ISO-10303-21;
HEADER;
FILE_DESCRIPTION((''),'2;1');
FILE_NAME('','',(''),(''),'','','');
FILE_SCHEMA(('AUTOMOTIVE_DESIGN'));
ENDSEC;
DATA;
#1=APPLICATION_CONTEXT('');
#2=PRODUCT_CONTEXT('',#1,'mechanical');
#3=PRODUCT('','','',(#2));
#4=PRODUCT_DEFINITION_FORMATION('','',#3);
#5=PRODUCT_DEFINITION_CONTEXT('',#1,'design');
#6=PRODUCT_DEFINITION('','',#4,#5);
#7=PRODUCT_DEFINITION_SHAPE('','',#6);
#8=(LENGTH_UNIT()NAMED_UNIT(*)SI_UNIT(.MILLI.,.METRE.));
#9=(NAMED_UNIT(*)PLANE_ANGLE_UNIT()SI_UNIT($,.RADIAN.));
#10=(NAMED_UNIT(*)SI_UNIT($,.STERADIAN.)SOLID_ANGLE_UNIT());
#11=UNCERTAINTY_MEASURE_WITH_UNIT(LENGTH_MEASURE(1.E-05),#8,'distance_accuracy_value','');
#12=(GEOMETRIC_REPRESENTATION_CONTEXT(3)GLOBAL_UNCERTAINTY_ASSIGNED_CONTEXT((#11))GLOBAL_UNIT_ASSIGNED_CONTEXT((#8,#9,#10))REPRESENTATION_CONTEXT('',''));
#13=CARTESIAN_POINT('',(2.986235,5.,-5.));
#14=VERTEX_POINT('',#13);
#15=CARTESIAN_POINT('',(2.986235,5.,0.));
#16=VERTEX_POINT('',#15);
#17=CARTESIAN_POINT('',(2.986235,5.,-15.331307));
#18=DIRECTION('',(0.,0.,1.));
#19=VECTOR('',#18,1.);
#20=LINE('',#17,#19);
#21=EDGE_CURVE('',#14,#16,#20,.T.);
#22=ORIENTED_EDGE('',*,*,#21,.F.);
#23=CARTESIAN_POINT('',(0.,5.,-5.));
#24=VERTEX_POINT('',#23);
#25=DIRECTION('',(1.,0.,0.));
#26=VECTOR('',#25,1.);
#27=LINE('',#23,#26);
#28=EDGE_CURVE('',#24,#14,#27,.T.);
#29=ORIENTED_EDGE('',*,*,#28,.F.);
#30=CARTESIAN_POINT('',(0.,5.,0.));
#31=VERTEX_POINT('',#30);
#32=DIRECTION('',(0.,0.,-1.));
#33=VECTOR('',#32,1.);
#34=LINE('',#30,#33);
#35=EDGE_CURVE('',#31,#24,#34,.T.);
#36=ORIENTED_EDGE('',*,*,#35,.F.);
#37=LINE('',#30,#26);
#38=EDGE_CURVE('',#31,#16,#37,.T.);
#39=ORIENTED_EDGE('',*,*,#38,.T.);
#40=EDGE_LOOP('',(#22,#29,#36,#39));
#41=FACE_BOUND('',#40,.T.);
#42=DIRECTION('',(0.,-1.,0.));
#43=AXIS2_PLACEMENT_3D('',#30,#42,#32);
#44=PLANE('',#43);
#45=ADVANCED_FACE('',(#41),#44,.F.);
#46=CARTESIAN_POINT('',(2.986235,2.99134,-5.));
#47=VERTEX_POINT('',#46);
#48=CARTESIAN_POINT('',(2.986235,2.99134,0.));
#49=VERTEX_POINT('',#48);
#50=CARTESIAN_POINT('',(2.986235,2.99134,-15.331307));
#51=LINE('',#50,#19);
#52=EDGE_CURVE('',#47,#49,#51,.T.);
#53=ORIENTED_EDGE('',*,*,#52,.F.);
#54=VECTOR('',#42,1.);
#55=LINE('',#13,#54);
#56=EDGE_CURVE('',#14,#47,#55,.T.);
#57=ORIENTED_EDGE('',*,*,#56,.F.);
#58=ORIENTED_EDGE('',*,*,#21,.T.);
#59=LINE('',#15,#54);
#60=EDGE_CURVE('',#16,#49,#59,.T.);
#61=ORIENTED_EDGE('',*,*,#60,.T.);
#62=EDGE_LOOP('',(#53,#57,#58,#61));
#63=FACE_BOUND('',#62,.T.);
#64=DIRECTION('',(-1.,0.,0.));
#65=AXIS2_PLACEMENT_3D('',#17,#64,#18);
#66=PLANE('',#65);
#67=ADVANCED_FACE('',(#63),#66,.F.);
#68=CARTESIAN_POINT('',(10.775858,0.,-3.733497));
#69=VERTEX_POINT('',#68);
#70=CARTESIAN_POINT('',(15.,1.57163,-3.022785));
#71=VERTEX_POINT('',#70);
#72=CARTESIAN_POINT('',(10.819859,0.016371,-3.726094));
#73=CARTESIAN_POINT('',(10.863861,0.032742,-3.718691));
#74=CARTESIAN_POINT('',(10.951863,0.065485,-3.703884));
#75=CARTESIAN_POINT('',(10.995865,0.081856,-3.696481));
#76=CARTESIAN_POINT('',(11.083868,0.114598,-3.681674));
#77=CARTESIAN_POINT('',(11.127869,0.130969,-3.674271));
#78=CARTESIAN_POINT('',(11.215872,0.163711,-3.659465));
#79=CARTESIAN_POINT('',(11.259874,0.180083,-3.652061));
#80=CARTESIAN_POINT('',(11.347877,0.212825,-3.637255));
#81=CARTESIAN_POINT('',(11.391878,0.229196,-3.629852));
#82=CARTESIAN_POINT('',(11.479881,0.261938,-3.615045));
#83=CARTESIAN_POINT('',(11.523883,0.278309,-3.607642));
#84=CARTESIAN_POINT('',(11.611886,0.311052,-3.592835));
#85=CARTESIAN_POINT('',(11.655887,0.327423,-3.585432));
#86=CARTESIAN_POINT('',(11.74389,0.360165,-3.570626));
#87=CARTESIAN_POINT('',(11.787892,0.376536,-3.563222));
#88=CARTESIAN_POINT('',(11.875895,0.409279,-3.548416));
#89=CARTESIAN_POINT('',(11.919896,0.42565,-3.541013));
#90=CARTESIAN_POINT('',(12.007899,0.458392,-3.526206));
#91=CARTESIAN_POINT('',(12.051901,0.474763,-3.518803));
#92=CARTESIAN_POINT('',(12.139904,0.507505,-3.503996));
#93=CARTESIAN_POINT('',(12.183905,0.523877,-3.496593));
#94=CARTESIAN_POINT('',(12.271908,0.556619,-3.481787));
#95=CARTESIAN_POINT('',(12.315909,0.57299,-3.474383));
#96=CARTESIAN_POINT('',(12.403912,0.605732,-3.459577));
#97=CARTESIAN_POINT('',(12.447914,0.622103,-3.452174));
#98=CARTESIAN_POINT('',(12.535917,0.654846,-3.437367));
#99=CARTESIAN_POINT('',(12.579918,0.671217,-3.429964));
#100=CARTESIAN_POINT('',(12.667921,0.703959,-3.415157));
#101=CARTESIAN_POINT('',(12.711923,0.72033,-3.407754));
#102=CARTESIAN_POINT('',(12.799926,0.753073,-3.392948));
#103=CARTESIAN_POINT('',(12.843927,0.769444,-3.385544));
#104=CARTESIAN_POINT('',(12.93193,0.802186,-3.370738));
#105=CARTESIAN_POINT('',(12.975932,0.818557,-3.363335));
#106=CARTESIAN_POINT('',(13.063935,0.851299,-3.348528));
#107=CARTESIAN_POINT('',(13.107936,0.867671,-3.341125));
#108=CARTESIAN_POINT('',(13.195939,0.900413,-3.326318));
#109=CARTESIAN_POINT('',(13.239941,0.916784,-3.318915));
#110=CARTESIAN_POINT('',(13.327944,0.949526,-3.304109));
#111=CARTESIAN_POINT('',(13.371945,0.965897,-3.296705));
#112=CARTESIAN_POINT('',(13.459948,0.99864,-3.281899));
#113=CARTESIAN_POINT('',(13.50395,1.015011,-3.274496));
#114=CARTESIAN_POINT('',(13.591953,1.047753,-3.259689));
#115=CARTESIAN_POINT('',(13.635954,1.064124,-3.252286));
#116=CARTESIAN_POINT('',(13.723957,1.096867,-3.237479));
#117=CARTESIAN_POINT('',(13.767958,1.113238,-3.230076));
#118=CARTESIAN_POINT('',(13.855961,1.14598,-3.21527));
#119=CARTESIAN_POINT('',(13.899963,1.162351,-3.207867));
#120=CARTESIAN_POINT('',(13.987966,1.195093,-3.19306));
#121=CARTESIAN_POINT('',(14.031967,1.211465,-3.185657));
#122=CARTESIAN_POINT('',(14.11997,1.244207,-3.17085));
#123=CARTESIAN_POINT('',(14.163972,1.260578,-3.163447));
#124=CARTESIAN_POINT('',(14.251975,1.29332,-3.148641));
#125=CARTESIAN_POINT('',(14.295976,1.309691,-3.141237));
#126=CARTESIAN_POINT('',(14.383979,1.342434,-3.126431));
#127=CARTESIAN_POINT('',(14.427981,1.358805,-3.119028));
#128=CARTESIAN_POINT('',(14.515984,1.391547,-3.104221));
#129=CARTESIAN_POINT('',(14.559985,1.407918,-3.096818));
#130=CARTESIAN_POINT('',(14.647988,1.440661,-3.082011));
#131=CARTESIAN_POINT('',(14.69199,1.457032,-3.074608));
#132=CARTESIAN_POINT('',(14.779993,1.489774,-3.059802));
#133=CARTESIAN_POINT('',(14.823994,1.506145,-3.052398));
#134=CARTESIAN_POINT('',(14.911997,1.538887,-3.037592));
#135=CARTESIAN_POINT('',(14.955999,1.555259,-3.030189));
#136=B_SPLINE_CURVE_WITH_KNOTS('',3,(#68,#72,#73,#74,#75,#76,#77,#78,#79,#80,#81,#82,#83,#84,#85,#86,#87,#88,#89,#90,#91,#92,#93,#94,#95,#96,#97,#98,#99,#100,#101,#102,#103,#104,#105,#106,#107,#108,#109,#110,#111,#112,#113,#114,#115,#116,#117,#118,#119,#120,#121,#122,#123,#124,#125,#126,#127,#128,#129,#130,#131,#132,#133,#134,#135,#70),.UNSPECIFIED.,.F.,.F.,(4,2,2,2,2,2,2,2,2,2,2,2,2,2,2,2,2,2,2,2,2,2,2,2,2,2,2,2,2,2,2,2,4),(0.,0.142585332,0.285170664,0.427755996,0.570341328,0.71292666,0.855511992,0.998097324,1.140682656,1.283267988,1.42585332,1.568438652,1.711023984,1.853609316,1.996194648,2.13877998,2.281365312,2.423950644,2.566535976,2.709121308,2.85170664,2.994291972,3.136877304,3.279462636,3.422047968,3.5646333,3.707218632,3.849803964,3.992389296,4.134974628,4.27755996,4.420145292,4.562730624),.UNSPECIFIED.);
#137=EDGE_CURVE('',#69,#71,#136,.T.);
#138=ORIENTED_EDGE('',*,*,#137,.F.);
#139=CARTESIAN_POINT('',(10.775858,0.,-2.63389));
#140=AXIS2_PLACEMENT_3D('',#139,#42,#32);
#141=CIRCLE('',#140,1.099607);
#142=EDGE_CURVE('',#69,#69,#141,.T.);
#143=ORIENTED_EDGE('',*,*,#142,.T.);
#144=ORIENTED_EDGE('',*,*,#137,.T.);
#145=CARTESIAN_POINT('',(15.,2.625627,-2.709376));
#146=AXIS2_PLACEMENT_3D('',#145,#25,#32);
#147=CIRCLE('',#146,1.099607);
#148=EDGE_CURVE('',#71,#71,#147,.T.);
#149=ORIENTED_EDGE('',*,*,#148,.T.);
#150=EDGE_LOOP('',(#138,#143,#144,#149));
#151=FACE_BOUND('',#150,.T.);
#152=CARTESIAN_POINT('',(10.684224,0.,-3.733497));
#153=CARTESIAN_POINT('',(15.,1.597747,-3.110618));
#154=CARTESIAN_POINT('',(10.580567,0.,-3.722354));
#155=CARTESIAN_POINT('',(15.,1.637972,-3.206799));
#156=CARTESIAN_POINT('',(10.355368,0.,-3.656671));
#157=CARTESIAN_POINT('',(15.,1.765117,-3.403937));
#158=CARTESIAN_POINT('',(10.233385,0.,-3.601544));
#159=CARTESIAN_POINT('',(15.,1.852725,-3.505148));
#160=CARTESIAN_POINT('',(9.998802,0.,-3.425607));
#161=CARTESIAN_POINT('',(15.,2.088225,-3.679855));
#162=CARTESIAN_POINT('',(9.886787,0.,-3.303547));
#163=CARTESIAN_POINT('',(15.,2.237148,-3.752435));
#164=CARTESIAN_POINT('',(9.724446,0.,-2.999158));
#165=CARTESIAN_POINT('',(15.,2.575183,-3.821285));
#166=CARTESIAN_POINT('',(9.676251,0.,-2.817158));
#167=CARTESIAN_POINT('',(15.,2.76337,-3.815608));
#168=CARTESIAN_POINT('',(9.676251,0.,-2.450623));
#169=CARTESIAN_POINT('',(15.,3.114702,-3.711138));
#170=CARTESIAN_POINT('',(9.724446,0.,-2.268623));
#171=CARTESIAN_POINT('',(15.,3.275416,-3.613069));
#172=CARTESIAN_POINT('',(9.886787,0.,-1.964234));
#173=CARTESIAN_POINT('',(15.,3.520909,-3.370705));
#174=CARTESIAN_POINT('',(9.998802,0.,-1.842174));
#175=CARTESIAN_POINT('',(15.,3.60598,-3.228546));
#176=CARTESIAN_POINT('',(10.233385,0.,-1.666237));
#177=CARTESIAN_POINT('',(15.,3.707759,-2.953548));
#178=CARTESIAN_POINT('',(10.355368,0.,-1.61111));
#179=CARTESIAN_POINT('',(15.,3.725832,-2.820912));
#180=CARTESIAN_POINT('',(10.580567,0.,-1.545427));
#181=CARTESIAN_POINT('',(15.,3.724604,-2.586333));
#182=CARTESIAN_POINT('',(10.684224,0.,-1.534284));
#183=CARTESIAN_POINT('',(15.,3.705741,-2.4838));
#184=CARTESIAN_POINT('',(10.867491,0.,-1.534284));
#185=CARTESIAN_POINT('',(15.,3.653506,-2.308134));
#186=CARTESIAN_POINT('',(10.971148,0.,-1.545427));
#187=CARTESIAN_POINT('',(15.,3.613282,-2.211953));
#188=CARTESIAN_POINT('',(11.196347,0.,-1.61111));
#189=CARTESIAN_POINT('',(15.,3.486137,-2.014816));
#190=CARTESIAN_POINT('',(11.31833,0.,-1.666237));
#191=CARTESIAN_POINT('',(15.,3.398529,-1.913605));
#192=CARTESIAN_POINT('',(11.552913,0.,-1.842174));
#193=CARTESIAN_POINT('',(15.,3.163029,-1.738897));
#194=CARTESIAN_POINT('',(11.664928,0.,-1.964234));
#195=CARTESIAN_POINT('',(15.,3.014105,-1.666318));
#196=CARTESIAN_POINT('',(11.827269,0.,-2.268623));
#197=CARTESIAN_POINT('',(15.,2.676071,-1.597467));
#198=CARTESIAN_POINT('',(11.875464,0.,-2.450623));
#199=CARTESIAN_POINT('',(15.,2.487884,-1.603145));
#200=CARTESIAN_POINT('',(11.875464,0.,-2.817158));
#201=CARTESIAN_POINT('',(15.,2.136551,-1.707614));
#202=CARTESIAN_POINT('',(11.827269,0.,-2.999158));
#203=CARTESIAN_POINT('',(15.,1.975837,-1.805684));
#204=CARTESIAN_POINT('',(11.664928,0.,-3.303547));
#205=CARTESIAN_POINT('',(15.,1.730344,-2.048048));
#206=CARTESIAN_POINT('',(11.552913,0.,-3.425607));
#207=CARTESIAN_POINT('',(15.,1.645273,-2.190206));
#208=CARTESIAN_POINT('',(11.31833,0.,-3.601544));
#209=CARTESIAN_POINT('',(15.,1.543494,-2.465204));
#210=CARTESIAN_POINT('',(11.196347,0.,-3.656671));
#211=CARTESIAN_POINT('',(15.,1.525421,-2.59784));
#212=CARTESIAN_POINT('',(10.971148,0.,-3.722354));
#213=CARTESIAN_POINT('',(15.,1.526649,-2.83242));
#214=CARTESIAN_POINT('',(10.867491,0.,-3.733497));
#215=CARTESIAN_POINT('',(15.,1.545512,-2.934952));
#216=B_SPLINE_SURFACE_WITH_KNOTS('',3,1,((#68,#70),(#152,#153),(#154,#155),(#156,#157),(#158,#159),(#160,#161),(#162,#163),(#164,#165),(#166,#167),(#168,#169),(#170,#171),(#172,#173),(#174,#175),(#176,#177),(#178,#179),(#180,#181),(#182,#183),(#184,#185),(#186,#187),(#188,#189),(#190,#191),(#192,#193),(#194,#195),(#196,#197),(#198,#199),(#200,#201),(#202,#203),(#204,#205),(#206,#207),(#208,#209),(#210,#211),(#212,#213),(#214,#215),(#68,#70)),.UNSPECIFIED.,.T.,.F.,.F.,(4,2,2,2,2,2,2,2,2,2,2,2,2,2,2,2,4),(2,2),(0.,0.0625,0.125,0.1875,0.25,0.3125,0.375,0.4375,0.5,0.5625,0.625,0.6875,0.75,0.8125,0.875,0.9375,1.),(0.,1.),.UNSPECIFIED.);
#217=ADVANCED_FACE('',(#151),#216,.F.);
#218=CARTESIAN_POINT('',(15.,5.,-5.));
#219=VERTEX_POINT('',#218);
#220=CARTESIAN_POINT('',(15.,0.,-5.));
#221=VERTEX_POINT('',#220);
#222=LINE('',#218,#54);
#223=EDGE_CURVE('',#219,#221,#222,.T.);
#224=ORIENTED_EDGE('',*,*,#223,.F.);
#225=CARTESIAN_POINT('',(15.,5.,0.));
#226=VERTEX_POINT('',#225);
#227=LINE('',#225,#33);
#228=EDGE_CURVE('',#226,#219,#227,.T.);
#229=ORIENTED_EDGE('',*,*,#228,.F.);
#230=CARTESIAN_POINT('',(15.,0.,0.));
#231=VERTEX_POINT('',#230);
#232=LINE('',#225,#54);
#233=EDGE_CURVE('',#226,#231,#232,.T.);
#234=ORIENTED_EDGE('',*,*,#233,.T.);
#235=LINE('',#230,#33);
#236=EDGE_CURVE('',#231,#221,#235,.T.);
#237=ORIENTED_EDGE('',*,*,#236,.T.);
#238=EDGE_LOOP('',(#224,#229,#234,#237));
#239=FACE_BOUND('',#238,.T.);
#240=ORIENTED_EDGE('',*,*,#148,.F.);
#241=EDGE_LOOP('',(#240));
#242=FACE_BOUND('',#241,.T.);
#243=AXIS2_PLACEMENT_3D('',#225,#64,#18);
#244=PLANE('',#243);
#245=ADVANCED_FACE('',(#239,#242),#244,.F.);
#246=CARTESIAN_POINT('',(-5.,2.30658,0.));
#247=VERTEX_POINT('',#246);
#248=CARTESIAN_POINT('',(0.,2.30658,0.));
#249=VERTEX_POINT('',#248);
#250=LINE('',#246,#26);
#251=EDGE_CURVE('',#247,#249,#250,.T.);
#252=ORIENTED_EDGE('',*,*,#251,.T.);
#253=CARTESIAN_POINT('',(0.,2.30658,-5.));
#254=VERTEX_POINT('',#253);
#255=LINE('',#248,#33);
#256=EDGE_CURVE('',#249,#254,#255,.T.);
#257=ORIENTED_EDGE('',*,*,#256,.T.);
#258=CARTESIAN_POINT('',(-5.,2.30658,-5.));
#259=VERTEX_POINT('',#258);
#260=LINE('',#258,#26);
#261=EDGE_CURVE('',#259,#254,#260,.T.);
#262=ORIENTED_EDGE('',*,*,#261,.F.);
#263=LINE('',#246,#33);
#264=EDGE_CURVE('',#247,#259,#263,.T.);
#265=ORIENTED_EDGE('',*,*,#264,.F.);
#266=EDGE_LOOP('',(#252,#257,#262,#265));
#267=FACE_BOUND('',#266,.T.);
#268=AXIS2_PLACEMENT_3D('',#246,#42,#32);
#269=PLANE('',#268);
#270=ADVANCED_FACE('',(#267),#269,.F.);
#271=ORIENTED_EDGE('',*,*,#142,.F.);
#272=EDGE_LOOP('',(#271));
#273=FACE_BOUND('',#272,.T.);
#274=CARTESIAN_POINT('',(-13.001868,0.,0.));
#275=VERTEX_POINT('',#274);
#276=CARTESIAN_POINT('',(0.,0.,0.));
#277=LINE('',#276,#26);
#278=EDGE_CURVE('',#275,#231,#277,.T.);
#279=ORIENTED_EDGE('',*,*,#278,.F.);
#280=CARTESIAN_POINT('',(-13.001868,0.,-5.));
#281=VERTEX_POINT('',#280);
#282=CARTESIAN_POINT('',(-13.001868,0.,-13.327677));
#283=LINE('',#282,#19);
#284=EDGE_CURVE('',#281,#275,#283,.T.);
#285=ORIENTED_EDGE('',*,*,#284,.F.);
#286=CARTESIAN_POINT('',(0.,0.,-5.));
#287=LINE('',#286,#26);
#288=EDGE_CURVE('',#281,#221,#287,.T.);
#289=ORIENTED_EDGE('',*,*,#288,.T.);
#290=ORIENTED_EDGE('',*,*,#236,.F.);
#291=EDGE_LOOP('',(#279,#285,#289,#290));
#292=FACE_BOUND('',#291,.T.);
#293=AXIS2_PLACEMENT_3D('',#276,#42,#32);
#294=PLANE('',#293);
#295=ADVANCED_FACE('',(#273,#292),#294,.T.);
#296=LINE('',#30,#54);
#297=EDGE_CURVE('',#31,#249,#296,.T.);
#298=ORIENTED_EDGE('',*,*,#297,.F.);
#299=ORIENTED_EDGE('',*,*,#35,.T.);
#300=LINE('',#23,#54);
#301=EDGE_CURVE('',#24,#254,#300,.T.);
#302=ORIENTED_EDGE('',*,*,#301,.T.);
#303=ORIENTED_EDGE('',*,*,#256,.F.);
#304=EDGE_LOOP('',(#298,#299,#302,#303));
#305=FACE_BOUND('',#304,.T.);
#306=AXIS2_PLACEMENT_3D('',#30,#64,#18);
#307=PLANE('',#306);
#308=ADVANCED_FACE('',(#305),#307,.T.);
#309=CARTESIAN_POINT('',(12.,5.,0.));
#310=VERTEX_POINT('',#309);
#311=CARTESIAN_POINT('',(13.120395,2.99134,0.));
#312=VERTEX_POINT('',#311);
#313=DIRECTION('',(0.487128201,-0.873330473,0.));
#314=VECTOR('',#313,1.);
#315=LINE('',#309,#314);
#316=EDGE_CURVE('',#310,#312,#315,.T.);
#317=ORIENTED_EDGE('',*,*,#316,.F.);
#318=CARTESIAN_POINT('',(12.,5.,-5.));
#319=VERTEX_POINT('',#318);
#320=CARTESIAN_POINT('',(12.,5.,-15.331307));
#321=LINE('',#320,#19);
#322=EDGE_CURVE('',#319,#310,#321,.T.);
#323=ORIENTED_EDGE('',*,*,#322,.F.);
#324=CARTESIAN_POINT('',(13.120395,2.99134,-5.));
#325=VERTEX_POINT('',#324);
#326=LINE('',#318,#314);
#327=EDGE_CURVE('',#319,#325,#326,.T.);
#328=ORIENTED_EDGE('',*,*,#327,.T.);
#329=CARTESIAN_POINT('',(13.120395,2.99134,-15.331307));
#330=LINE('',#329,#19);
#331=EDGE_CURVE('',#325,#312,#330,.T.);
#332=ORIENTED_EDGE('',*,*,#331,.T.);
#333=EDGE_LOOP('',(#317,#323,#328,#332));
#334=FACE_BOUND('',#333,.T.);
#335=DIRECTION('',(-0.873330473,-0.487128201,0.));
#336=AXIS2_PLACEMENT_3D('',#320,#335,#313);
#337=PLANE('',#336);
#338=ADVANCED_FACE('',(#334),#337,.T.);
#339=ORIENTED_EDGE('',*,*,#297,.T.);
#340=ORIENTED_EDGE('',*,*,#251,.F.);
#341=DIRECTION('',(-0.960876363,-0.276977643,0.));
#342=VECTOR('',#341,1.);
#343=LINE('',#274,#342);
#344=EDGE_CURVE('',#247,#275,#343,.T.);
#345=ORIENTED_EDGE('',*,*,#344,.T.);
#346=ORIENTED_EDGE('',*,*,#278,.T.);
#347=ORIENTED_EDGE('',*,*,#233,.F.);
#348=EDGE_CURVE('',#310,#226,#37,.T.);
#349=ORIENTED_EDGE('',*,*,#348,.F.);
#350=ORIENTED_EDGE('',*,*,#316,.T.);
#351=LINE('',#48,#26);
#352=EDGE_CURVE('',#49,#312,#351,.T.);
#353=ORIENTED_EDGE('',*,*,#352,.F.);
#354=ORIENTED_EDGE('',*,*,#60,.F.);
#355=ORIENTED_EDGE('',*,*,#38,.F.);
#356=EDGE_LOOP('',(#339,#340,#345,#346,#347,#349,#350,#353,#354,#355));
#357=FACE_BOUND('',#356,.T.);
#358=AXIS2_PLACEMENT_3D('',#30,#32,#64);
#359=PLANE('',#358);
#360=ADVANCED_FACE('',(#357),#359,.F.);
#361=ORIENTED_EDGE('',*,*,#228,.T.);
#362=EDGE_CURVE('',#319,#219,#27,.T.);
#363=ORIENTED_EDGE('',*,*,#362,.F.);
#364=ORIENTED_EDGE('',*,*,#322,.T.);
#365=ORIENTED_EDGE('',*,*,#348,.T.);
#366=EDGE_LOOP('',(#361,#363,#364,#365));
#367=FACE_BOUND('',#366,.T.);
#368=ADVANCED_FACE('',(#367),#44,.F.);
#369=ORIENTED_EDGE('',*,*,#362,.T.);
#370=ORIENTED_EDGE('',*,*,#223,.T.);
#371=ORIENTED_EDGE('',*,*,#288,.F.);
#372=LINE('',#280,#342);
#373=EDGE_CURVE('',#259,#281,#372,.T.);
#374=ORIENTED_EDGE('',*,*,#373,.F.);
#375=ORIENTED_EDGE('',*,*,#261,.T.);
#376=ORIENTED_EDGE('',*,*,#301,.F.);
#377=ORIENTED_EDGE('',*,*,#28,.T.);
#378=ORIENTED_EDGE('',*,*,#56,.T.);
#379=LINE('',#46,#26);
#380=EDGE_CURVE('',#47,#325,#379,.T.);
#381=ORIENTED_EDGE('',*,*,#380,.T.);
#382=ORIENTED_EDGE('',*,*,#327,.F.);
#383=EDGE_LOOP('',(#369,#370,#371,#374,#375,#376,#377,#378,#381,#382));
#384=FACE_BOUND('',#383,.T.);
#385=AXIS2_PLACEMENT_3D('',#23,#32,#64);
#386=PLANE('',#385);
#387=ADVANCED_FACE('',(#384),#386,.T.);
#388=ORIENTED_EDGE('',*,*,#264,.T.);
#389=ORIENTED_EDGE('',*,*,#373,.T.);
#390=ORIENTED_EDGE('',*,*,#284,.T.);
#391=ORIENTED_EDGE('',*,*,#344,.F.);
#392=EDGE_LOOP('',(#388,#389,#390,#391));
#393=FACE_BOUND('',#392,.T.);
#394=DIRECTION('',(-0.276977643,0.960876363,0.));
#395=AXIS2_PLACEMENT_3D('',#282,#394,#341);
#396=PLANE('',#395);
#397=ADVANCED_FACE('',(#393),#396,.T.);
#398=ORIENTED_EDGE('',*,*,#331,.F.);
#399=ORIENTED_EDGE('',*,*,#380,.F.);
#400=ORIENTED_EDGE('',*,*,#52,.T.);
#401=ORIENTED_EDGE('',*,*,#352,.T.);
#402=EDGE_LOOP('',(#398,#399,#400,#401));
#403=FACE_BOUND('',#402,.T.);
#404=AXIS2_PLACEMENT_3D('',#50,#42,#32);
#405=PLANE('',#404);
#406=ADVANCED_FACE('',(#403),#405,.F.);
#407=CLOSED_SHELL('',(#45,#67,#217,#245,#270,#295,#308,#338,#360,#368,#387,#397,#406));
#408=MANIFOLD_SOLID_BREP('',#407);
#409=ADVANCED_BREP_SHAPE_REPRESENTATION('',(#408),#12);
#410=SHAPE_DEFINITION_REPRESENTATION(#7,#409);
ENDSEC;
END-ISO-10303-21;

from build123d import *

# Parameters (mm, degrees)
SKETCH1_W           = 15
SKETCH1_H           = 5
BOSS_EXTRUDE1_DEPTH = 5
CUT_EXTRUDE1_DEPTH  = 5
SKETCH3_W           = 5
SKETCH3_H           = 2.306580292
BOSS_EXTRUDE2_DEPTH = 5
BOSS_EXTRUDE3_DEPTH = 5


with BuildPart() as part:
    # Sketch1 → Boss-Extrude1 (new body)
    with BuildSketch(Plane(origin=(0, 0, 0), x_dir=(1, 0, 0), z_dir=(0, 1, 0))):
        with Locations((7.5, 2.5)):
            Rectangle(SKETCH1_W, SKETCH1_H)
    extrude(amount=BOSS_EXTRUDE1_DEPTH)

    # Sketch2 → Cut-Extrude1 (cut)
    with BuildSketch(Plane.XY):
        Polygon((3, 5), (12, 5), (13.120394862, 2.991339911), (2.986234937, 2.991339911), (2.986234937, 5), align=None)
    extrude(amount=-CUT_EXTRUDE1_DEPTH, mode=Mode.SUBTRACT)

    # Sketch3 → Boss-Extrude2 (add)
    with BuildSketch(Plane.ZY):
        with Locations((-2.5, 1.153290146)):
            Rectangle(SKETCH3_W, SKETCH3_H)
    extrude(amount=BOSS_EXTRUDE2_DEPTH)

    # Sketch7 → Boss-Extrude3 (add)
    with BuildSketch(Plane.XY):
        Polygon((-5, 0), (-13.001867805, 0), (-5, 2.306580292), align=None)
    extrude(amount=-BOSS_EXTRUDE3_DEPTH)

    # Cut-Loft1: read off the stored shape, not the designer's step
    # Cut-Loft1: loft between two sections, ruled curve by curve
    cut_loft1_from = [
        Edge.make_bspline([(10.775857545, 0, -3.733497041), (10.684223664, 0, -3.733497041), (10.580567417, 0, -3.722354361), (10.355367989, 0, -3.656671194), (10.233384966, 0, -3.601544251), (9.998802229, 0, -3.425607198), (9.886786943, 0, -3.303547063), (9.724445949, 0, -2.999157699), (9.676250966, 0, -2.817158224), (9.676250966, 0, -2.450622698), (9.724445949, 0, -2.268623224), (9.886786943, 0, -1.964233859), (9.998802229, 0, -1.842173724), (10.233384966, 0, -1.666236672), (10.355367989, 0, -1.611109728), (10.580567417, 0, -1.545426562), (10.684223664, 0, -1.534283882), (10.867491427, 0, -1.534283882), (10.971147674, 0, -1.545426562), (11.196347101, 0, -1.611109728), (11.318330124, 0, -1.666236672), (11.552912861, 0, -1.842173724), (11.664928148, 0, -1.964233859), (11.827269142, 0, -2.268623224), (11.875464125, 0, -2.450622698), (11.875464125, 0, -2.817158224), (11.827269142, 0, -2.999157699), (11.664928148, 0, -3.303547063), (11.552912861, 0, -3.425607198), (11.318330124, 0, -3.601544251), (11.196347101, 0, -3.656671194), (10.971147674, 0, -3.722354361), (10.867491427, 0, -3.733497041), (10.775857545, 0, -3.733497041)], [0, 0, 0, 0, 0.0625, 0.0625, 0.125, 0.125, 0.1875, 0.1875, 0.25, 0.25, 0.3125, 0.3125, 0.375, 0.375, 0.4375, 0.4375, 0.5, 0.5, 0.5625, 0.5625, 0.625, 0.625, 0.6875, 0.6875, 0.75, 0.75, 0.8125, 0.8125, 0.875, 0.875, 0.9375, 0.9375, 1, 1, 1, 1], 3),
    ]
    cut_loft1_to = [
        Edge.make_bspline([(15, 1.571629768, -3.022785324), (15, 1.59774719, -3.110618396), (15, 1.637971718, -3.206799289), (15, 1.765116639, -3.403936879), (15, 1.852724527, -3.505148024), (15, 2.088224624, -3.67985524), (15, 2.237148437, -3.752434842), (15, 2.575182586, -3.821285391), (15, 2.763369546, -3.815607976), (15, 3.114701834, -3.71113829), (15, 3.275415798, -3.613068993), (15, 3.520909325, -3.370704781), (15, 3.60598011, -3.228546199), (15, 3.70775901, -2.953548085), (15, 3.725831875, -2.820912459), (15, 3.724604446, -2.586332933), (15, 3.705740921, -2.483800283), (15, 3.653506078, -2.308134139), (15, 3.61328155, -2.211953246), (15, 3.486136629, -2.014815656), (15, 3.398528741, -1.913604511), (15, 3.163028644, -1.738897295), (15, 3.014104831, -1.666317693), (15, 2.676070682, -1.597467144), (15, 2.487883722, -1.603144559), (15, 2.136551433, -1.707614245), (15, 1.97583747, -1.805683542), (15, 1.730343943, -2.048047754), (15, 1.645273158, -2.190206336), (15, 1.543494258, -2.46520445), (15, 1.525421393, -2.597840076), (15, 1.526648822, -2.832419602), (15, 1.545512347, -2.934952252), (15, 1.571629768, -3.022785324)], [0, 0, 0, 0, 0.0625, 0.0625, 0.125, 0.125, 0.1875, 0.1875, 0.25, 0.25, 0.3125, 0.3125, 0.375, 0.375, 0.4375, 0.4375, 0.5, 0.5, 0.5625, 0.5625, 0.625, 0.625, 0.6875, 0.6875, 0.75, 0.75, 0.8125, 0.8125, 0.875, 0.875, 0.9375, 0.9375, 1, 1, 1, 1], 3),
    ]
    cut_loft1 = Solid(Shell([*[Face.make_surface_from_curves(cut_loft1_from[k], cut_loft1_to[k]) for k in range(1)], Face(Wire(cut_loft1_from)), Face(Wire(cut_loft1_to))]))
    add(cut_loft1, mode=Mode.SUBTRACT)


solid = part.part
